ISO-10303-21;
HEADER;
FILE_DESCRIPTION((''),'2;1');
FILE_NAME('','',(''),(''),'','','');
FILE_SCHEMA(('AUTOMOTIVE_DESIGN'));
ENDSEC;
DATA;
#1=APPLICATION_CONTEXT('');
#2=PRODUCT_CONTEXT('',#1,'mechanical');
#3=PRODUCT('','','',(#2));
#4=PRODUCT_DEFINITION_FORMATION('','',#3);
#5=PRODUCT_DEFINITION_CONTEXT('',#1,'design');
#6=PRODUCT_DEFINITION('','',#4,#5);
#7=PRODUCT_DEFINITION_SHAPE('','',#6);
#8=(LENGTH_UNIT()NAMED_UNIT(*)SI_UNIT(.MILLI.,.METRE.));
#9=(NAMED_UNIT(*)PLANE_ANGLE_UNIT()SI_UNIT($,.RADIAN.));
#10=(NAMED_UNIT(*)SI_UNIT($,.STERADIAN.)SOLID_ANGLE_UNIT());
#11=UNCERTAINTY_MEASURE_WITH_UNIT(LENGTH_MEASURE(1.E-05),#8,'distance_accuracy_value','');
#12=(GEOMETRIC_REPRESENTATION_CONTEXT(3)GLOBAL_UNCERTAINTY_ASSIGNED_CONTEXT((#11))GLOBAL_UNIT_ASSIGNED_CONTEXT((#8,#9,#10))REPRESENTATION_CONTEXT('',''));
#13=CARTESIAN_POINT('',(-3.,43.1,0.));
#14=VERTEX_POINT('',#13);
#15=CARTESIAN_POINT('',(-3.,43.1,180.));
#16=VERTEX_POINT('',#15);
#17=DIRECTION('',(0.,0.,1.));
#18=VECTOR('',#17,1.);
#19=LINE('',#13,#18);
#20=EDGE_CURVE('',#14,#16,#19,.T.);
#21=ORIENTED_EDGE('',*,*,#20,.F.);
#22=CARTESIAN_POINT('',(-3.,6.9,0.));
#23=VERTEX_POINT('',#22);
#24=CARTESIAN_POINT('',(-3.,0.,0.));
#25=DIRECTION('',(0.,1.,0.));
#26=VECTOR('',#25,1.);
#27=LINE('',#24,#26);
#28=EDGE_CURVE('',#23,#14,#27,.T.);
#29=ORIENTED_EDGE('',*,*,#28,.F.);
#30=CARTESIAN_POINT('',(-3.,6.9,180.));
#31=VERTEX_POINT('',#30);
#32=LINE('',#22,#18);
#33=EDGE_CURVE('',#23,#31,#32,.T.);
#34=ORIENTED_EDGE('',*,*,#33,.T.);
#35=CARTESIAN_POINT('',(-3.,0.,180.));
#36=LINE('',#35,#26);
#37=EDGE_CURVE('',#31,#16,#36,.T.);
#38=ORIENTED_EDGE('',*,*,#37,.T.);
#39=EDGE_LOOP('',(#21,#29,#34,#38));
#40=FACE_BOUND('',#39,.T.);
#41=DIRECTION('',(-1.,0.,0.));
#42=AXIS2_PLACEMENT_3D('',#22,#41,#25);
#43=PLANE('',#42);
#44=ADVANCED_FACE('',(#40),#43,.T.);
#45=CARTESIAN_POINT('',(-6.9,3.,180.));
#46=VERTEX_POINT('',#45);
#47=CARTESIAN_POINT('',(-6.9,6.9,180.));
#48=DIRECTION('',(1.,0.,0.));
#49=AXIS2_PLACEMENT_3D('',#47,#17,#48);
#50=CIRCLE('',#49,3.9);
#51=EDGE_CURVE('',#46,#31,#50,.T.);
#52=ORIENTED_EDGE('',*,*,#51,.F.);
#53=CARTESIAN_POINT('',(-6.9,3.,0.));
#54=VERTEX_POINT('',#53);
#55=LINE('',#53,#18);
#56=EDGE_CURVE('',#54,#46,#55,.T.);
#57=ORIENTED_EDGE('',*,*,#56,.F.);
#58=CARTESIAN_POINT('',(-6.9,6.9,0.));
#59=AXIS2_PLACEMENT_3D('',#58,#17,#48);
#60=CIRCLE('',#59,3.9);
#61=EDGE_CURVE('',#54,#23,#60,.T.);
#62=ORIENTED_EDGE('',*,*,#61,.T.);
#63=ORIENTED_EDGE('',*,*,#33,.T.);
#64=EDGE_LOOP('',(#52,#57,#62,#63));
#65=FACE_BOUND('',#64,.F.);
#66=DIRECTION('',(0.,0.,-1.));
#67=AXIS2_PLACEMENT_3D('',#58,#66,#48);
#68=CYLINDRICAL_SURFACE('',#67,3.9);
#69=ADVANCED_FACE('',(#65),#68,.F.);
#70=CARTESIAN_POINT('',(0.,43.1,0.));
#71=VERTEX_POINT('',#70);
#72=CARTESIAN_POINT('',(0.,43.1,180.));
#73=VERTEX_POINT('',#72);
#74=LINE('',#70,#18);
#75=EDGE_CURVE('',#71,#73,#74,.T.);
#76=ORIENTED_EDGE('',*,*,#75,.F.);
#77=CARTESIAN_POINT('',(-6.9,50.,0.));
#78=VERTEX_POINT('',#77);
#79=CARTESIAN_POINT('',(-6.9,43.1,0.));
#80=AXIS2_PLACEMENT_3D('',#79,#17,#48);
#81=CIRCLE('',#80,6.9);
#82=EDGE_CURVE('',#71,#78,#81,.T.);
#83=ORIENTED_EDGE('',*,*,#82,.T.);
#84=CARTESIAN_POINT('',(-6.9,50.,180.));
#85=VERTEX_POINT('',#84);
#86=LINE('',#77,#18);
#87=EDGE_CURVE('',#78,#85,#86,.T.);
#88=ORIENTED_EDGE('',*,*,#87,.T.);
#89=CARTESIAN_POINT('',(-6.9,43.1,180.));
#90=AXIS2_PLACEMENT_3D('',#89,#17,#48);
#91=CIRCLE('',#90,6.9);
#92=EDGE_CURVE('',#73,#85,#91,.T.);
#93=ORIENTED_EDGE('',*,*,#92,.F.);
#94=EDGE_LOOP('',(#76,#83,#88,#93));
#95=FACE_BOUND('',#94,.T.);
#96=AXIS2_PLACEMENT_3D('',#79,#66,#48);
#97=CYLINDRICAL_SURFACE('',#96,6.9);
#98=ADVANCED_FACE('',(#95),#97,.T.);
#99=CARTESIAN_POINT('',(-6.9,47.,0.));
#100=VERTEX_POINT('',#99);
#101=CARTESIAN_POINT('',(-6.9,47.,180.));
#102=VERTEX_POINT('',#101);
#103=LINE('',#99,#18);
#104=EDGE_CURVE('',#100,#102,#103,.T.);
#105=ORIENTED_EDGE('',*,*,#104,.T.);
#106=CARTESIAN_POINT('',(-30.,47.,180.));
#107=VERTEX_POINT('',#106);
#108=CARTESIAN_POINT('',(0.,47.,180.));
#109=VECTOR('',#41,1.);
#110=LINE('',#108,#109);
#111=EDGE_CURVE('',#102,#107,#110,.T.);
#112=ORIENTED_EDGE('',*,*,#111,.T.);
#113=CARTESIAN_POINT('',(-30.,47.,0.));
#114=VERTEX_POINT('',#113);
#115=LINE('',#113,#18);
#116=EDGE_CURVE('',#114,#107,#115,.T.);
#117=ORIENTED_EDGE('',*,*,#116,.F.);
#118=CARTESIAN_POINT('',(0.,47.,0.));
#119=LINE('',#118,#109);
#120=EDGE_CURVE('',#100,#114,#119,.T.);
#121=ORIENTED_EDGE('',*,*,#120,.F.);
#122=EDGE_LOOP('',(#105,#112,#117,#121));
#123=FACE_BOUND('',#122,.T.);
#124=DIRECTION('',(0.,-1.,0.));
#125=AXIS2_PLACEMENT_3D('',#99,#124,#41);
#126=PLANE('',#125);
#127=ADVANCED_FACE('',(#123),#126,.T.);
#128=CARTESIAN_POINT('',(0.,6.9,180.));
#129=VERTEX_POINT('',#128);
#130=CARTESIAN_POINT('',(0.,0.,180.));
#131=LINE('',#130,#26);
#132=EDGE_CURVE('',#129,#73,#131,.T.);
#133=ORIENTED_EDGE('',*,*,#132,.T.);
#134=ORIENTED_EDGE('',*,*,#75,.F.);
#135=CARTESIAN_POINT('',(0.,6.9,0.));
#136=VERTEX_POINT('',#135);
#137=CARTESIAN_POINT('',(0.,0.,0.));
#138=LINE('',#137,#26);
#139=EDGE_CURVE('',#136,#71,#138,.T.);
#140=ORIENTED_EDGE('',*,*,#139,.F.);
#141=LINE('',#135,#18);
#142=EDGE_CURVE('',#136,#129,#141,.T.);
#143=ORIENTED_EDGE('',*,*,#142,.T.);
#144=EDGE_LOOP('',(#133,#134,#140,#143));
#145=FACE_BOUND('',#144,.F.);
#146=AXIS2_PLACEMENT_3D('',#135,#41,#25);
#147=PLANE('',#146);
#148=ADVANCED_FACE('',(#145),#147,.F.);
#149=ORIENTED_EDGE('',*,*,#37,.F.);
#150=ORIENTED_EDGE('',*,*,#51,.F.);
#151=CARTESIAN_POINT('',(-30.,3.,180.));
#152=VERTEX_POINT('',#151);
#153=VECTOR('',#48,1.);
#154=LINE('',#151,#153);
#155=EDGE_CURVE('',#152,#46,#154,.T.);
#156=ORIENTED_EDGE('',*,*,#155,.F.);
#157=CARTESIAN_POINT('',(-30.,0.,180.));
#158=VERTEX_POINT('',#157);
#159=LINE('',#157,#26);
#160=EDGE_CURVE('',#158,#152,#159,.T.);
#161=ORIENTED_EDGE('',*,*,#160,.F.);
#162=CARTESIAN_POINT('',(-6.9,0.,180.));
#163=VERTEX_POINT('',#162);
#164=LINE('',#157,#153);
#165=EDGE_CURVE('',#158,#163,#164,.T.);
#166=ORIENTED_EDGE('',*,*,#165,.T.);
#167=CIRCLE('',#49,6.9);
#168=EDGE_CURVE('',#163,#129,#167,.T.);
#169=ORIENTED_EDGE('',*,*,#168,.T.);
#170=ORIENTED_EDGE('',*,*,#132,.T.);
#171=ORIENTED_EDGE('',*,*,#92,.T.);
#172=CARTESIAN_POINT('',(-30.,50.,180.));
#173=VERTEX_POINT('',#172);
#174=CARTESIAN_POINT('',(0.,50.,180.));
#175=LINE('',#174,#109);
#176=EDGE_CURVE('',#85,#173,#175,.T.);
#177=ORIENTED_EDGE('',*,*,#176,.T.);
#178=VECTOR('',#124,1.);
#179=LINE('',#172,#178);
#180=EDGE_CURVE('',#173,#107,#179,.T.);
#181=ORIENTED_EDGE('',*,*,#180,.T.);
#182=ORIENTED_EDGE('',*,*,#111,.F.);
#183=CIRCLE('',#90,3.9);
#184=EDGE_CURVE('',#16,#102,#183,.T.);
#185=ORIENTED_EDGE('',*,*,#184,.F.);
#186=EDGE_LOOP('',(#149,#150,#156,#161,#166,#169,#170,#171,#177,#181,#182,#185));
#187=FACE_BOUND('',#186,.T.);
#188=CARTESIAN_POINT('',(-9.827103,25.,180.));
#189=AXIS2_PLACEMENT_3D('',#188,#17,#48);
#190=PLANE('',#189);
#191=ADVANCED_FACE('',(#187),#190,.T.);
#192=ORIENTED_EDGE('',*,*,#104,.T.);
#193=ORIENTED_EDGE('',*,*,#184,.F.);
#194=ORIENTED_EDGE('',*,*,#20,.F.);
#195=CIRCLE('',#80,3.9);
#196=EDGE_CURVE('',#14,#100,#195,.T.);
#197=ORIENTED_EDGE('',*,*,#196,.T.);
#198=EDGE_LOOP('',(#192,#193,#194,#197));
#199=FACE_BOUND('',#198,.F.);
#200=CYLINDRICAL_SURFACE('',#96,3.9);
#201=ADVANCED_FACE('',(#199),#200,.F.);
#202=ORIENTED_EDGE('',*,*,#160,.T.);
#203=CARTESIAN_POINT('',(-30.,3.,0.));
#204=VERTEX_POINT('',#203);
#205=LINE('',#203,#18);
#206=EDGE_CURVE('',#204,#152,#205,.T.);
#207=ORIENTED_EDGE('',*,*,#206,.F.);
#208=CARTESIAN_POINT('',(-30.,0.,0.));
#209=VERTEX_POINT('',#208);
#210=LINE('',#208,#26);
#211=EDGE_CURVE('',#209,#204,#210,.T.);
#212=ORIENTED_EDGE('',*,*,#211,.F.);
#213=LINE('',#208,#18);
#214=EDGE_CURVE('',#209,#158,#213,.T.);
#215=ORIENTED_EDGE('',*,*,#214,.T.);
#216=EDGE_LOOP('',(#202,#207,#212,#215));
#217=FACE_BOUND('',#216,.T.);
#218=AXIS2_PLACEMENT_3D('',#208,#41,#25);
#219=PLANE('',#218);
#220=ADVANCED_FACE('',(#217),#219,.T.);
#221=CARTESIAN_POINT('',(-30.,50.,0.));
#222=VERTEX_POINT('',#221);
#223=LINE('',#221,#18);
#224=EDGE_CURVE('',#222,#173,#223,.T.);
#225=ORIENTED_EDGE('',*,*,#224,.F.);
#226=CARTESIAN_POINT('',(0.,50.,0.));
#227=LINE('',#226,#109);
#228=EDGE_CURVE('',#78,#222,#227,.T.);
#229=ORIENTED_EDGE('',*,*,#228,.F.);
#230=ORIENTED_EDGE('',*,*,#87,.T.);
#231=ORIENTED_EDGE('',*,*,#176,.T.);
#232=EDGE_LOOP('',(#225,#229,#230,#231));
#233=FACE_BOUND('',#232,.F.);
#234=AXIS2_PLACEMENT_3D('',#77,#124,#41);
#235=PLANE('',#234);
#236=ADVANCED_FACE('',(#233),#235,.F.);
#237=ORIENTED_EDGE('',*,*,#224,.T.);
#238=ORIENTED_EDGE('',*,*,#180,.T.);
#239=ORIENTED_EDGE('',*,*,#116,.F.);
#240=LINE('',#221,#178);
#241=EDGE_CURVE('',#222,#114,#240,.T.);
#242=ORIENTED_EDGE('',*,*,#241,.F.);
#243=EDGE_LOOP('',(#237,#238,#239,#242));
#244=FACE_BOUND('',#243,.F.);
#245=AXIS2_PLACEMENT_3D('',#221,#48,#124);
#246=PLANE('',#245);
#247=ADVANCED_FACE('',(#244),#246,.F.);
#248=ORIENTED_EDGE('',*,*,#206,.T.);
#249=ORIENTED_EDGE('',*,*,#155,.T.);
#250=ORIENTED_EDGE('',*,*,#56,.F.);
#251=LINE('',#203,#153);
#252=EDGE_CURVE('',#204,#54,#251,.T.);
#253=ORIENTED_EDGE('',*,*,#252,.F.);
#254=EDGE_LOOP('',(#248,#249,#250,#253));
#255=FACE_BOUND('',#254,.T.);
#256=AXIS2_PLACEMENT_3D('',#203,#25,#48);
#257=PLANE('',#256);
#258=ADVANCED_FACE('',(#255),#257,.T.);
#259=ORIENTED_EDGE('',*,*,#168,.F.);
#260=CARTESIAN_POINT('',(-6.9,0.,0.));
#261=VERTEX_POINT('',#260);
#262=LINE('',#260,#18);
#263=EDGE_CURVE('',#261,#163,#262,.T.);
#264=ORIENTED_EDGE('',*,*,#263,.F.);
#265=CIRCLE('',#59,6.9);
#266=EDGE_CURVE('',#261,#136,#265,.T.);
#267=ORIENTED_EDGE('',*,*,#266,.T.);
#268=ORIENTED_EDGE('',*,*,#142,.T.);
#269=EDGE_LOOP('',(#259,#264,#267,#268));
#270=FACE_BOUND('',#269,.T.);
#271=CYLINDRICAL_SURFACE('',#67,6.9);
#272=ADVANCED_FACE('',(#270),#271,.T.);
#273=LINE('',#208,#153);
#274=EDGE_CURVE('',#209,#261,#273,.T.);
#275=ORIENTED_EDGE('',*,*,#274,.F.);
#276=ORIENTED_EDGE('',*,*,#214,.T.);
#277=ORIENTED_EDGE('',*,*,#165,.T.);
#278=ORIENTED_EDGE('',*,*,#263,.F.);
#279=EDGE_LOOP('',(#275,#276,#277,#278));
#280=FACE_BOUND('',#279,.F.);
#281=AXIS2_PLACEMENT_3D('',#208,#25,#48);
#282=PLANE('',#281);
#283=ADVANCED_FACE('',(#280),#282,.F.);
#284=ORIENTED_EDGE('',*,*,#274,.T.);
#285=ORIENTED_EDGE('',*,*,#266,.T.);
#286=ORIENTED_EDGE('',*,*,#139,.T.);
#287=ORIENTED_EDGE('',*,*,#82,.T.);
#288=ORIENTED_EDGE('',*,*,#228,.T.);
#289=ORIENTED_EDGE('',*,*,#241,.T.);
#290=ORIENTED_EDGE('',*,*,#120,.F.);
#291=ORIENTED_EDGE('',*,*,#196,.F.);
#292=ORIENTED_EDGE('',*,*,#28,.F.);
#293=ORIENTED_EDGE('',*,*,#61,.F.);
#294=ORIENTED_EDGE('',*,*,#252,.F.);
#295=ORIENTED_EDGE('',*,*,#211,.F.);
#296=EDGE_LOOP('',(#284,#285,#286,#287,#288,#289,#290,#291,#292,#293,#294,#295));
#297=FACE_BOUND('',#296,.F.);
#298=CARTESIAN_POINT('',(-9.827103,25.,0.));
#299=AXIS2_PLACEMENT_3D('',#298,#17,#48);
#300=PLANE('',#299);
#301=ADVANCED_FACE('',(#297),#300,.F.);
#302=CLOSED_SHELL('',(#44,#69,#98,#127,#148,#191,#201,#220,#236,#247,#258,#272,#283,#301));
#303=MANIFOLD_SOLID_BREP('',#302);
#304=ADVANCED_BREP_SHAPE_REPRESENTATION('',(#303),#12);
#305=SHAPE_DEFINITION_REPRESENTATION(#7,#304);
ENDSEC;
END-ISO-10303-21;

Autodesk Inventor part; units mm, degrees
ref_plane "YZ Plane" through (0, 0, 0) normal (1, 0, 0) x (0, 1, 0)
ref_plane "XZ Plane" through (0, 0, 0) normal (0, 1, 0) x (-1, 0, 0)
ref_plane "XY Plane" through (0, 0, 0) normal (0, 0, 1) x (1, 0, 0)
sketch "Sketch1" plane through (0, 0, 0) normal (0, 0, 1) x (1, 0, 0)
  line L0 (-30, 0) -> (0, 0)
  line L1 (0, 0) -> (0, 50)
  line L2 (0, 50) -> (-30, 50)
  dimension "d0" = 30
  dimension "d1" = 30
  dimension "d2" = 50
contour flange "Contour Flange1" sketch "Sketch1" thickness 3 bend radius 3.9 width 180 along (0, 0, 1) mid plane no both sides no wall seen from (-15, 0, 0) lies toward (0, 1, 0) curves L0 L1 L2
bend "Bend1"
corner "Corner1"
equation "\"d1\" = d0"
equation "\"d3\" = BendReliefWidth"
equation "\"d4\" = BendReliefDepth"
equation "\"d5\" = MinimumRemnant"
equation "\"d6\" = BendRadius"
equation "\"d8\" = BendRadius"
equation "\"d10\" = CornerReliefSize"
equation "\"d11\" = GapSize"
equation "\"d12\" = JacobiRadiusSize"
equation "\"BendReliefWidth\" = Thickness"
equation "\"BendReliefDepth\" = 0.5 * Thickness"
equation "\"CornerReliefSize\" = 4 * Thickness"
equation "\"MinimumRemnant\" = 2 * Thickness"
equation "\"TransitionRadius\" = BendRadius"
equation "\"JacobiRadiusSize\" = BendRadius"
equation "\"GapSize\" = Thickness"
equation "\"BendRadius\" = 3.9"
equation "\"Thickness\" = 3"
properties part number "Poot"
